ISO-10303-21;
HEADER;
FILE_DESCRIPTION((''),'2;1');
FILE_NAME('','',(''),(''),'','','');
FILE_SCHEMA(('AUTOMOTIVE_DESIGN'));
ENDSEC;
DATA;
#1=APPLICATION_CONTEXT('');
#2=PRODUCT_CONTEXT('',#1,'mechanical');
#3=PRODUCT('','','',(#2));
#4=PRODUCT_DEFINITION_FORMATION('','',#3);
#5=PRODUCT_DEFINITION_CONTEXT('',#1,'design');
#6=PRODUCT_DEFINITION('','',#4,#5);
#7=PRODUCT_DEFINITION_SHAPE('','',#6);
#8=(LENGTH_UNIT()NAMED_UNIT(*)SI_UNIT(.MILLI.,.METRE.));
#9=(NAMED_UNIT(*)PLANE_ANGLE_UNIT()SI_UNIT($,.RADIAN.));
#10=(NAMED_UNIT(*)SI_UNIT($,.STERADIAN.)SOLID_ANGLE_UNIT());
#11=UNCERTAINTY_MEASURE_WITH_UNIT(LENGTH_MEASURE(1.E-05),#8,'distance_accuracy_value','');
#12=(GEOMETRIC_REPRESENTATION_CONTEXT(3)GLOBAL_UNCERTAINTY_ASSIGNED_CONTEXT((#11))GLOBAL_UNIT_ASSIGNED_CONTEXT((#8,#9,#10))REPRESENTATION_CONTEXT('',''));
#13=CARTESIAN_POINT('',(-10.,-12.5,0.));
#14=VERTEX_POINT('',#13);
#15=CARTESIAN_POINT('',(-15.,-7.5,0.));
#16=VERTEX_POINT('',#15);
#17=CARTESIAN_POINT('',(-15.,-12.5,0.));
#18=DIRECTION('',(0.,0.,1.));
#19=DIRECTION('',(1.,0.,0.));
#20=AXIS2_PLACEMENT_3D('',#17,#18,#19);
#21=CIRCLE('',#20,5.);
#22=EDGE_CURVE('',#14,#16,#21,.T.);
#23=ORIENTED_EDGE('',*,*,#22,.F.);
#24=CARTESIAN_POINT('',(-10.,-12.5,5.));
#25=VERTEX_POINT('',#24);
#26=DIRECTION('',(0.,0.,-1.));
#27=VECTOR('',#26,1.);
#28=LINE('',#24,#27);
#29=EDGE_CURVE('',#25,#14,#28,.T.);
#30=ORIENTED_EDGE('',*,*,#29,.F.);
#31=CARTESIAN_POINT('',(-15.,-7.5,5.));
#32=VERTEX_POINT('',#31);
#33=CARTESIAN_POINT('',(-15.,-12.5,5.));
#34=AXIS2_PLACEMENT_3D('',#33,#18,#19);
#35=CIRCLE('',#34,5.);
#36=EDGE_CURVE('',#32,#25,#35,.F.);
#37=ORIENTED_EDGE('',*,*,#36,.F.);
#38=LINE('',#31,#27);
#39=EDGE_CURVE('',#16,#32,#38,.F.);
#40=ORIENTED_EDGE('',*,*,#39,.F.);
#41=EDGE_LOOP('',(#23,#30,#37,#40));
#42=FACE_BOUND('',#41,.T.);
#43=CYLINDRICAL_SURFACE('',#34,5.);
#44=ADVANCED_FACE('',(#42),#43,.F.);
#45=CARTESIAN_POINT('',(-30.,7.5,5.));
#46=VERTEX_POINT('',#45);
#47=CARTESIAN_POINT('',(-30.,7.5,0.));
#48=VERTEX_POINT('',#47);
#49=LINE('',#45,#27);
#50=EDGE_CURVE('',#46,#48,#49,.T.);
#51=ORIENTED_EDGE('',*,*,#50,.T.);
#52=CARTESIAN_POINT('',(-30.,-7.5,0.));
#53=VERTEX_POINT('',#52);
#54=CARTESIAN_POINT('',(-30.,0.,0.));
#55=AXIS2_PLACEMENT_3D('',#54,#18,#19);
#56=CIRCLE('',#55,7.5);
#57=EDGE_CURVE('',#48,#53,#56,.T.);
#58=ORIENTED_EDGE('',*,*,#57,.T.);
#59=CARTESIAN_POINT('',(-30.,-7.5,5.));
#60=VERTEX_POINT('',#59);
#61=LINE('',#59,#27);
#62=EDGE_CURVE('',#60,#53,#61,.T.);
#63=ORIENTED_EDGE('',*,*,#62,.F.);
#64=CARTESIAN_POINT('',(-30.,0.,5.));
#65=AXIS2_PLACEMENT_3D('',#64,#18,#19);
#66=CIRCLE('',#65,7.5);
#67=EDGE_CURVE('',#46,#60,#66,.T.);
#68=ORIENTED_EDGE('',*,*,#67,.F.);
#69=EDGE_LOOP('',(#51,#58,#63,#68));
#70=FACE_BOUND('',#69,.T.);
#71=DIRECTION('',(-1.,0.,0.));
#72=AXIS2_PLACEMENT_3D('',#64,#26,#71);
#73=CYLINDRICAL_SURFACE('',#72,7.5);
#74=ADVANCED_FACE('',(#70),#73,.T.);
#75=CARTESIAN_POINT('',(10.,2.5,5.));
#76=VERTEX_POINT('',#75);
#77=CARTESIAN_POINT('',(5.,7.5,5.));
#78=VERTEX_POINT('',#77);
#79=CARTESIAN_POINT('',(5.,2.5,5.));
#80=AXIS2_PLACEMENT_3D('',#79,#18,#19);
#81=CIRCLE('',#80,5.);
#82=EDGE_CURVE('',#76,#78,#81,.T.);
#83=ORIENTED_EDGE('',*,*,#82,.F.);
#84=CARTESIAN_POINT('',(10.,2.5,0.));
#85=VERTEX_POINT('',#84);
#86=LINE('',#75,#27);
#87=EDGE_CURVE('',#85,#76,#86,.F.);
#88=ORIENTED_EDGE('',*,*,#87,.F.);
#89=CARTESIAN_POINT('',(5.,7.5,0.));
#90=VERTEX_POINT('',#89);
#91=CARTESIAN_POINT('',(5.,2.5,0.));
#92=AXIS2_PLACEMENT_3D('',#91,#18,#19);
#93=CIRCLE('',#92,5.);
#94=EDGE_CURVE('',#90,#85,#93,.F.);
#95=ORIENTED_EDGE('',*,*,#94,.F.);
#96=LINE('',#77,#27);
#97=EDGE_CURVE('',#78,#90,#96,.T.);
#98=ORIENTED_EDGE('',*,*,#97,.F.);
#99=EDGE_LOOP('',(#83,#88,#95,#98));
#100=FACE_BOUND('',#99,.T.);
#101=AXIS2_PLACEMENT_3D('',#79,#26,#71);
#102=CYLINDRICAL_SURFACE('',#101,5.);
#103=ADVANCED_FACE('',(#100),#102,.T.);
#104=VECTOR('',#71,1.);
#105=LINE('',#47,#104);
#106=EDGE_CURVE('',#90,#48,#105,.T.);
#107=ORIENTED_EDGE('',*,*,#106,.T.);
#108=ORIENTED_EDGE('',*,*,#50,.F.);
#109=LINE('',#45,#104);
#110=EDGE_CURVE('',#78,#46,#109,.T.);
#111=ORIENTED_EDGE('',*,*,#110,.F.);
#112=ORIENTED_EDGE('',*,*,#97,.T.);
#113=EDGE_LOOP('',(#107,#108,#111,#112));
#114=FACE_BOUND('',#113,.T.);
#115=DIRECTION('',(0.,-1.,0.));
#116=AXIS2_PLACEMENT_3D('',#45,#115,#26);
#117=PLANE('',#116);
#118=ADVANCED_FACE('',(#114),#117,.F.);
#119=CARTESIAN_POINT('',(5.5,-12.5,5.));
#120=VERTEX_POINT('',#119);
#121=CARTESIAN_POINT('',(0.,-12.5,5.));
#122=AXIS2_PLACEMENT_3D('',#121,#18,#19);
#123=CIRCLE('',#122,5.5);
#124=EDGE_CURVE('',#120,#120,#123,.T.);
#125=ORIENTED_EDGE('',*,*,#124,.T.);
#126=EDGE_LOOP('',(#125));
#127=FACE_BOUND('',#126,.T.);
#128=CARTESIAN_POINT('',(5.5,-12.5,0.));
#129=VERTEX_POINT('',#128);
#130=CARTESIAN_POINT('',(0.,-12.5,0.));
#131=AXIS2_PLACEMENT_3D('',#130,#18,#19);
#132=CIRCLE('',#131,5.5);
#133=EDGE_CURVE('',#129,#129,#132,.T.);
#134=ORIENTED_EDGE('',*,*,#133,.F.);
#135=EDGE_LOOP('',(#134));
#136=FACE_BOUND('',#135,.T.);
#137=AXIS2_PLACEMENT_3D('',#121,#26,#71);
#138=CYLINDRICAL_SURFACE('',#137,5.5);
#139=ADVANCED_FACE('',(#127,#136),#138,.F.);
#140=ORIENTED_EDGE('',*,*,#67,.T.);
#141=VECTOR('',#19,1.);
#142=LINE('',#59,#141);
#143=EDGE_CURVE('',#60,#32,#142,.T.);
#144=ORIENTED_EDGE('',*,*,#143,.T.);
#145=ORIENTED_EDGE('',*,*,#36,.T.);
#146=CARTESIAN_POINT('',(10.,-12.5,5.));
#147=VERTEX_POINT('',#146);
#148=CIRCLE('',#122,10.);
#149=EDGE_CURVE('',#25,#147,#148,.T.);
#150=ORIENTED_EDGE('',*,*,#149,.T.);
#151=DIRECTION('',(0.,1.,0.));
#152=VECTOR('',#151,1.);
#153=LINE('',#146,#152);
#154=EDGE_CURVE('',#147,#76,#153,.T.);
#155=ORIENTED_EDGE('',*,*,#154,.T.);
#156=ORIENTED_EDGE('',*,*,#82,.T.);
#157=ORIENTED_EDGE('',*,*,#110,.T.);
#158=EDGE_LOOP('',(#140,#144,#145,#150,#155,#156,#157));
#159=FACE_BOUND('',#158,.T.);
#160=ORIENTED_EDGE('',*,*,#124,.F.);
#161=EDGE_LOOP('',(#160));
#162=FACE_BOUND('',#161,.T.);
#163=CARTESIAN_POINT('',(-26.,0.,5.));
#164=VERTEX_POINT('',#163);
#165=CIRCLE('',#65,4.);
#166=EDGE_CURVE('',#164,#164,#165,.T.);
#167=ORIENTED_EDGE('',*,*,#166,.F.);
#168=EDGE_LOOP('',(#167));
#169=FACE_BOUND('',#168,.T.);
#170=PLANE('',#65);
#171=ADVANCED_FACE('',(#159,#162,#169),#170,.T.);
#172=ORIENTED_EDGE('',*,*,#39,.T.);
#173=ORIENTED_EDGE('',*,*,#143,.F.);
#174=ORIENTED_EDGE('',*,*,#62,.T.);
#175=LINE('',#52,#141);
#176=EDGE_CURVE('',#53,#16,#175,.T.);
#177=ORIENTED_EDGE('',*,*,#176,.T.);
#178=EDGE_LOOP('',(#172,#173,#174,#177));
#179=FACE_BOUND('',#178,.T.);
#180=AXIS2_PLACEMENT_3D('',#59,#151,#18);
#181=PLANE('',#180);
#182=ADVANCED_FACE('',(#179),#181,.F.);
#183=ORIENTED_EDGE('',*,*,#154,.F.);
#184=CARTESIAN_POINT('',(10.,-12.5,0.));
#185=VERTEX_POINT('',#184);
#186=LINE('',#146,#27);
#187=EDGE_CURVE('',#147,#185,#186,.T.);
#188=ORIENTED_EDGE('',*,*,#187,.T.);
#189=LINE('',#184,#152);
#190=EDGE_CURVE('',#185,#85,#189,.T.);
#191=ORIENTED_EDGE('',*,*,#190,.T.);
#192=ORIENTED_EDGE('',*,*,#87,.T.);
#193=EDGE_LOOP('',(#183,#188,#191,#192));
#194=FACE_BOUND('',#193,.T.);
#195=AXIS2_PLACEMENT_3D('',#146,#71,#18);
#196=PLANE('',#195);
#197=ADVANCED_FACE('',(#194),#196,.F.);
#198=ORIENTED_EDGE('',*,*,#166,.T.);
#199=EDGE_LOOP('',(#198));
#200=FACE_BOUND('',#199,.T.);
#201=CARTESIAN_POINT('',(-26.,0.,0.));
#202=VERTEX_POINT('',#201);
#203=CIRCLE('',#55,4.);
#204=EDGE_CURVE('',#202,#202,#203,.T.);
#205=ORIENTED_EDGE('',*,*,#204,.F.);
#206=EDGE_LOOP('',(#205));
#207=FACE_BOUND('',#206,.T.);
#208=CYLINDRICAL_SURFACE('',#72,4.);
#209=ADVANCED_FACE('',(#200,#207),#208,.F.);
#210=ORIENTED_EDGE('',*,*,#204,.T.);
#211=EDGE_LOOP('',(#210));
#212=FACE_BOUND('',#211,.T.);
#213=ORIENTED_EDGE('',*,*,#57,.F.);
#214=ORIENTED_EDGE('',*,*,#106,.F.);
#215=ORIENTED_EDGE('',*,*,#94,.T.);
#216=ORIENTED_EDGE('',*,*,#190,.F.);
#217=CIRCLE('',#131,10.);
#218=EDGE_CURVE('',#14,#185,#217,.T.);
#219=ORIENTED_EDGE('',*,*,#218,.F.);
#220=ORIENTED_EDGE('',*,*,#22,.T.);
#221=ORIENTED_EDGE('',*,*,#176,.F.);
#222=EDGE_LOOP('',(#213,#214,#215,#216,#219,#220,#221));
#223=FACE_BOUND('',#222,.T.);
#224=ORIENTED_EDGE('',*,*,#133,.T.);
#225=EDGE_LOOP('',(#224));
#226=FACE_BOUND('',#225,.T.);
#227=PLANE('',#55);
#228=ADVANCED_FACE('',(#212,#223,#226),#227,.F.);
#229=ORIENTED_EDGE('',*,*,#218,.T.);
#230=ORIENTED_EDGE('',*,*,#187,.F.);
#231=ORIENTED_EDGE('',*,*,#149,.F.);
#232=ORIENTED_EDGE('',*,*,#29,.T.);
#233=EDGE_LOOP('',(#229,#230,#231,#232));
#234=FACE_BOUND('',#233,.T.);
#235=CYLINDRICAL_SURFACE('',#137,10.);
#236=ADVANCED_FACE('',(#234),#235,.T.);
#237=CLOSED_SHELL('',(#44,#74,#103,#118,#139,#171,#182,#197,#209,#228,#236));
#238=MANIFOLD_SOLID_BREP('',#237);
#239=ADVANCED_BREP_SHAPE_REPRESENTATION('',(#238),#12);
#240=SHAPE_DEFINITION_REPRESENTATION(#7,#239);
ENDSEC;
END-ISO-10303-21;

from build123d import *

# Parameters (mm, degrees)
SKETCH_1_R       = 4
SKETCH_1_R_2     = 5.5
EXTRUDE_1_DEPTH  = 5
FILLET_1_DEPTH   = 5
FILLET_1_2_DEPTH = 5


with BuildPart() as part:
    # 草图1 → 凸台-拉伸1 (new body)
    with BuildSketch(Plane.XY):
        with BuildLine():
            Line((-30, -7.5), (-10, -7.5))
            Line((-10, -7.5), (-10, -12.5))
            ThreePointArc((-10, -12.5), (0, -22.5), (10, -12.5))
            Line((10, -12.5), (10, 7.5))
            Line((10, 7.5), (-30, 7.5))
            ThreePointArc((-30, 7.5), (-37.5, 0), (-30, -7.5))
        make_face()
        with Locations((-30, 0)):
            Circle(SKETCH_1_R, mode=Mode.SUBTRACT)
        with Locations((0, -12.5)):
            Circle(SKETCH_1_R_2, mode=Mode.SUBTRACT)
    extrude(amount=EXTRUDE_1_DEPTH)

    # 圆角1: read off the stored shape, not the designer's step
    # 圆角1 outline → 圆角1 (cut)
    with BuildSketch(Plane.XY):
        with BuildLine():
            Line((10, 7.5), (5, 7.5))
            ThreePointArc((5, 7.5), (8.535533906, 6.035533906), (10, 2.5))
            Line((10, 2.5), (10, 7.5))
        make_face()
    extrude(amount=FILLET_1_DEPTH, mode=Mode.SUBTRACT)

    # Fillet 1 2 outline → Fillet 1 2 (add)
    with BuildSketch(Plane.XY):
        with BuildLine():
            ThreePointArc((-15, -7.5), (-11.464466094, -8.964466094), (-10, -12.5))
            Line((-10, -12.5), (-10, -7.5))
            Line((-10, -7.5), (-15, -7.5))
        make_face()
    extrude(amount=FILLET_1_2_DEPTH)


solid = part.part
